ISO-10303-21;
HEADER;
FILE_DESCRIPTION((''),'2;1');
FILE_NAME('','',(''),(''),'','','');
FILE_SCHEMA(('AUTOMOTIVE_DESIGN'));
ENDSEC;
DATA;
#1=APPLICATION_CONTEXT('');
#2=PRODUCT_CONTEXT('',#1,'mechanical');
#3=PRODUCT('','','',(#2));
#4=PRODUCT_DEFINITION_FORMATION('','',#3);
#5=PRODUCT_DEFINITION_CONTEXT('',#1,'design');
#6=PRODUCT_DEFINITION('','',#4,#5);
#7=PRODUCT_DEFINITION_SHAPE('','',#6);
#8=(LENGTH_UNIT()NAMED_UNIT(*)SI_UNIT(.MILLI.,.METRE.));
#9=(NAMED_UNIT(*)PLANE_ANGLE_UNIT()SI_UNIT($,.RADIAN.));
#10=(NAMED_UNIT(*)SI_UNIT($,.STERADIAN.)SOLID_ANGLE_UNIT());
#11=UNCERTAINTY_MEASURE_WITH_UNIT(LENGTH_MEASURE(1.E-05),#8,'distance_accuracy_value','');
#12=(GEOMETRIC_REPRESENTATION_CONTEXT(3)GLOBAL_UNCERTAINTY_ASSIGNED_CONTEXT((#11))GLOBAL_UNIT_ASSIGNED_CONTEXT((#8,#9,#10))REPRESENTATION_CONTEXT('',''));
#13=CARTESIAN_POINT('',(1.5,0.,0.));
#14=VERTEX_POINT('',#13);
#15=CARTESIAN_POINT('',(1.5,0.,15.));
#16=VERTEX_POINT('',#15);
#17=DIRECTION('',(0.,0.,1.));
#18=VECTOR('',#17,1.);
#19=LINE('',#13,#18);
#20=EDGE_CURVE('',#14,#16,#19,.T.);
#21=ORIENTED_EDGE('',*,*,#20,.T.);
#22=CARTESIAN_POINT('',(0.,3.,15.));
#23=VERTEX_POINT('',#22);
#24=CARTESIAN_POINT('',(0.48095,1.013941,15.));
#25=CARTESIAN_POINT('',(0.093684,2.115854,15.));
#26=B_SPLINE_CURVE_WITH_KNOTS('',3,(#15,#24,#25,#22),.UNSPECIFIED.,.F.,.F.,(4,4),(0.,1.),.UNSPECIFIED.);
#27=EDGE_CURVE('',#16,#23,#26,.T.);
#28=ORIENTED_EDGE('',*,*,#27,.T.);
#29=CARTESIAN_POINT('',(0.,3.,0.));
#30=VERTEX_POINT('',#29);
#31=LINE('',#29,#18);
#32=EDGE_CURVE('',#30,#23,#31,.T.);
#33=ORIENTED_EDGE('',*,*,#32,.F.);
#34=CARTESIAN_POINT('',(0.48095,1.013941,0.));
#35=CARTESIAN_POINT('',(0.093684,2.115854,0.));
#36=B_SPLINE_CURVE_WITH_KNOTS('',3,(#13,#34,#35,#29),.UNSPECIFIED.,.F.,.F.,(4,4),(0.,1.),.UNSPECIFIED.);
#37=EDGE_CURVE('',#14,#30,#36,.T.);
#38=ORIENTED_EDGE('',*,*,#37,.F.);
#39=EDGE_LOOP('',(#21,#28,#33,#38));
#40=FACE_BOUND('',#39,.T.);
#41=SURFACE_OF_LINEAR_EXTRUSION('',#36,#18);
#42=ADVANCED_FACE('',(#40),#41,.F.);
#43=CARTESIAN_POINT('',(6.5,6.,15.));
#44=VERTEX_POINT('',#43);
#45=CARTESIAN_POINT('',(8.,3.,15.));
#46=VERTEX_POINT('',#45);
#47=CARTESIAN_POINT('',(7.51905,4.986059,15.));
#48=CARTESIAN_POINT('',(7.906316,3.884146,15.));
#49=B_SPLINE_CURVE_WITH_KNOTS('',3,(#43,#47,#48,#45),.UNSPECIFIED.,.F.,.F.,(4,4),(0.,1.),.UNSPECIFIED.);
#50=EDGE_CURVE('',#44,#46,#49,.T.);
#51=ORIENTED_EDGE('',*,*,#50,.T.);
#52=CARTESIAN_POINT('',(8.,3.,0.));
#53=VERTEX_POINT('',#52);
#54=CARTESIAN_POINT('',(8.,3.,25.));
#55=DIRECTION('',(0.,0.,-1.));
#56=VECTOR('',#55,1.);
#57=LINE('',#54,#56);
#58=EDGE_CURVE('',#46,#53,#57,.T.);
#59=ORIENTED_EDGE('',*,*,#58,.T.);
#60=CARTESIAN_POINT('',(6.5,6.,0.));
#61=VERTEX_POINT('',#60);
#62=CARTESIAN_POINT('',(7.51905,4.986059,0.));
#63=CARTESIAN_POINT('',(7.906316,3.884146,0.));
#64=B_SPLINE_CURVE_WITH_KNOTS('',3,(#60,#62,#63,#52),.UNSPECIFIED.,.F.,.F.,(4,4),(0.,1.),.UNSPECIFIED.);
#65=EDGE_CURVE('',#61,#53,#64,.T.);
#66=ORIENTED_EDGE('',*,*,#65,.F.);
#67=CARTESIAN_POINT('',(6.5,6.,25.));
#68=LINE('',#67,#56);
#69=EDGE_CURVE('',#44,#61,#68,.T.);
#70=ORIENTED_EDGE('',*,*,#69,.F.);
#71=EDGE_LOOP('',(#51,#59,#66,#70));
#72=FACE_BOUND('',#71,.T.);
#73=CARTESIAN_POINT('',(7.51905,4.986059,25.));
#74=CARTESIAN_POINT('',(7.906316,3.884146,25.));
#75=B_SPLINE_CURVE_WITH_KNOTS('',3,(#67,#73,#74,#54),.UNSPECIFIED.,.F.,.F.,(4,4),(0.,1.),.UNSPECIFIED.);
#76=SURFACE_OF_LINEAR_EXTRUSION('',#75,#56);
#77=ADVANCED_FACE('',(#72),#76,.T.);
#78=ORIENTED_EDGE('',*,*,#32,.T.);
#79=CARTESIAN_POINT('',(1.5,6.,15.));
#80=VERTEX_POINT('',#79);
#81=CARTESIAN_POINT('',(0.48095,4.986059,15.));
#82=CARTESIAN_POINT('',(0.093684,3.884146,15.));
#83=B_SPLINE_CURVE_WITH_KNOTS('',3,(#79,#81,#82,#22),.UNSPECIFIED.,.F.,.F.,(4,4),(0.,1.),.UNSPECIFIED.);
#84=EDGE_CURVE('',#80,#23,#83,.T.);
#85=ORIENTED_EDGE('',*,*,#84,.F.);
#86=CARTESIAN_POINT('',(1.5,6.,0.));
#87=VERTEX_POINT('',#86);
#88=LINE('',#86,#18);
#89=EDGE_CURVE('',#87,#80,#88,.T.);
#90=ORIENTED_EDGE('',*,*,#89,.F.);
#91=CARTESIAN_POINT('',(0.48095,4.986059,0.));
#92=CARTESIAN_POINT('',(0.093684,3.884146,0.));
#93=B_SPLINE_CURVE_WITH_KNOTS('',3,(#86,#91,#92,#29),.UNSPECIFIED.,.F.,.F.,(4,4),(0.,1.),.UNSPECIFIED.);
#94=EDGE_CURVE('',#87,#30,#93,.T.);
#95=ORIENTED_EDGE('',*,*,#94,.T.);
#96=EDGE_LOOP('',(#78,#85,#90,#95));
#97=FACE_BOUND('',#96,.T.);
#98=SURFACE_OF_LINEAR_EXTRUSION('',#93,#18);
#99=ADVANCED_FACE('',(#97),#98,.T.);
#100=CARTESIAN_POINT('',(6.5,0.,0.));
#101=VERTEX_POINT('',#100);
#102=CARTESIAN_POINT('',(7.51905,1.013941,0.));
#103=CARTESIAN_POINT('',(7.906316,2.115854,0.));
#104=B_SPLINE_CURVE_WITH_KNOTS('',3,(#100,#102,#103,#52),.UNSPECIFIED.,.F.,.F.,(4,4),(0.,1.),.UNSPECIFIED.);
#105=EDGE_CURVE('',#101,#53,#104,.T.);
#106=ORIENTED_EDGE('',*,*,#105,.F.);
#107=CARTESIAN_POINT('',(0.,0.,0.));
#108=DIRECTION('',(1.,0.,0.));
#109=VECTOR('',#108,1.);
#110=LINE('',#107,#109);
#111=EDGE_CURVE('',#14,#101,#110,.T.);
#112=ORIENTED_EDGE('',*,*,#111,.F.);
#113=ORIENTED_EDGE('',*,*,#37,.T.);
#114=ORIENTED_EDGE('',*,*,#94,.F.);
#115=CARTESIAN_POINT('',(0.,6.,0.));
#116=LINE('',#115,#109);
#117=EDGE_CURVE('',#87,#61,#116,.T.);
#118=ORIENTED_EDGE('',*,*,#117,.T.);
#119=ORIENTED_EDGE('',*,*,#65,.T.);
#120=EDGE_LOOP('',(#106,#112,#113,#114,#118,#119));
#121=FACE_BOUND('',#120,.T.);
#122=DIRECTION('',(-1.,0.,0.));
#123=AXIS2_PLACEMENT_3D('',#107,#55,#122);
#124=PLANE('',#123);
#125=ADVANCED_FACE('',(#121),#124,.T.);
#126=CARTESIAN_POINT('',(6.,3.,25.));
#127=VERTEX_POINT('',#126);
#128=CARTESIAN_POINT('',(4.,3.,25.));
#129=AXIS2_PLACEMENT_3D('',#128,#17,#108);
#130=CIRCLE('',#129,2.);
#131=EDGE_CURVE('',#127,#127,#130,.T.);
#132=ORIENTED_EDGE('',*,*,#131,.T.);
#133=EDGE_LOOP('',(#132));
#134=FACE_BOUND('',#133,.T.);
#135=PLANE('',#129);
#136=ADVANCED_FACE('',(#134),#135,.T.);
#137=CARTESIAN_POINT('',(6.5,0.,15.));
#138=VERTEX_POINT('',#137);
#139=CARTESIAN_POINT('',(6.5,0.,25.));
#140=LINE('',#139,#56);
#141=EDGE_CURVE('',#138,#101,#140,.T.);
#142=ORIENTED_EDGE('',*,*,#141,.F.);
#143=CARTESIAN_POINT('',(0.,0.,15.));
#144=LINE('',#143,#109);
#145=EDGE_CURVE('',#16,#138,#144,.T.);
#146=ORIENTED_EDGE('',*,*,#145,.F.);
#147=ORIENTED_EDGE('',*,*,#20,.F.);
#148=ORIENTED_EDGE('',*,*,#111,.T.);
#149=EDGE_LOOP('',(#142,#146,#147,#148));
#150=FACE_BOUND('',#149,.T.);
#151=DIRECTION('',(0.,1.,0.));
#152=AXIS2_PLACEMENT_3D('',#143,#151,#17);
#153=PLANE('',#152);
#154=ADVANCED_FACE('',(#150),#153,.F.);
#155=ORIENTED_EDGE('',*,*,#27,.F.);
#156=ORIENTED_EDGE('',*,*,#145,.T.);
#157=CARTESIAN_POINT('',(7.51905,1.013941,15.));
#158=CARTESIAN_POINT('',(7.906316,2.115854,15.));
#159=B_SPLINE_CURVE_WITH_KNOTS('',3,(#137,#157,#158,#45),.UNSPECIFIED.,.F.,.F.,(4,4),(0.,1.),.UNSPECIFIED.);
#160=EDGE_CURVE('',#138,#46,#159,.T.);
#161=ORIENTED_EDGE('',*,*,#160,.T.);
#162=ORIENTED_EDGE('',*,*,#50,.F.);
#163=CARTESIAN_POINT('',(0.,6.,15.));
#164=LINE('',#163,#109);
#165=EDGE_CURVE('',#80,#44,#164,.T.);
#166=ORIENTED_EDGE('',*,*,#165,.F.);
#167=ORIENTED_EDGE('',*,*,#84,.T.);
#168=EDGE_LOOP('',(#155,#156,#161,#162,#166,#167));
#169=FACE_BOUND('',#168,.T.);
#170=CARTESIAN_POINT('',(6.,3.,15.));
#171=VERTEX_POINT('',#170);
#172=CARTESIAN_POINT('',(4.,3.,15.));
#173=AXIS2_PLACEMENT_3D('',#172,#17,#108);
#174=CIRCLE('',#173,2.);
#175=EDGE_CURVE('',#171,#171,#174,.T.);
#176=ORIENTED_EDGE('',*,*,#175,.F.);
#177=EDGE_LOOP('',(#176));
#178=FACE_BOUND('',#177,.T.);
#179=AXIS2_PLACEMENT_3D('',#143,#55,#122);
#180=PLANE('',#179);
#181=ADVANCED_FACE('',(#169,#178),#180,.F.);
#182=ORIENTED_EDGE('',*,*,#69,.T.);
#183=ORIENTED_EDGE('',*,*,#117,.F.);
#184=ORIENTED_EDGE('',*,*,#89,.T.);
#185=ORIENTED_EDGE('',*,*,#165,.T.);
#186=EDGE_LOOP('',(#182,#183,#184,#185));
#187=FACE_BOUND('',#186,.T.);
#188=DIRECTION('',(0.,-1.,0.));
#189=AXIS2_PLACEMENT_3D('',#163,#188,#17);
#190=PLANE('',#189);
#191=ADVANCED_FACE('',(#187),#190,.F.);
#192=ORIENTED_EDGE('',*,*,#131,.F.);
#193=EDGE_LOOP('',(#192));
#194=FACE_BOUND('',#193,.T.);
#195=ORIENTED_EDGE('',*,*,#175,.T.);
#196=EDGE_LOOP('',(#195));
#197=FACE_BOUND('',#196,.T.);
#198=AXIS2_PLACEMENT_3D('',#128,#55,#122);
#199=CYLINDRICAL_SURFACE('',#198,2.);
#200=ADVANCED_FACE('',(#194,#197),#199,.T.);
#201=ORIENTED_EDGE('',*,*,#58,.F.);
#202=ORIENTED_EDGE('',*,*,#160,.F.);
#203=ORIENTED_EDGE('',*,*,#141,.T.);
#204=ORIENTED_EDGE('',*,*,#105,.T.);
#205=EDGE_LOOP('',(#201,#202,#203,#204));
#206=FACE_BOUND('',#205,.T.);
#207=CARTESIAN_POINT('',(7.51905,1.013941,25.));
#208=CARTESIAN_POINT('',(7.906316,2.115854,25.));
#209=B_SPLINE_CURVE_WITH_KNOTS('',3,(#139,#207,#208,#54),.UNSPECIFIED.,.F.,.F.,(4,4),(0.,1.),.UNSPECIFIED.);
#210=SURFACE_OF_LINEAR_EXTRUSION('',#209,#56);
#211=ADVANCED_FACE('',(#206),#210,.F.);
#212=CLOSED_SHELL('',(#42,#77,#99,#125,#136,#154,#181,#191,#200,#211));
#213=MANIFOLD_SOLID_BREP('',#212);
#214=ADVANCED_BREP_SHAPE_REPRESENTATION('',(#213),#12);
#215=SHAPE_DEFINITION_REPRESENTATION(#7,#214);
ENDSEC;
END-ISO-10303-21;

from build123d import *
from build123d.topology import SkipClean

# Parameters (mm, degrees)
SKETCH1_W               = 8
SKETCH1_H               = 6
BOSS_EXTRUDE1_DEPTH     = 15
SKETCH2_R               = 2
BOSS_EXTRUDE2_DEPTH     = 10
CUT_EXTRUDE1_DEPTH      = 27.925824036
CIRPATTERN1_DEPTH       = 15
CUT_EXTRUDE2_DEPTH      = 27.925824088
CUT_EXTRUDE2_DEPTH_BACK = 27.925824088
SKETCH4_W               = 8
SKETCH4_H               = 3


# Read off the part's stored shape, not the designer's step: CirPattern1
with BuildPart() as part:
    # Sketch1 → Boss-Extrude1 (new body)
    with BuildSketch(Plane.XY):
        with Locations((4, 3)):
            Rectangle(SKETCH1_W, SKETCH1_H)
    extrude(amount=BOSS_EXTRUDE1_DEPTH)

    # Sketch2 → Boss-Extrude2 (add)
    with BuildSketch(Plane.XY.offset(15)):
        with Locations((4, 3)):
            Circle(SKETCH2_R)
    extrude(amount=BOSS_EXTRUDE2_DEPTH)

    # Sketch3 → Cut-Extrude1 (cut, through all)
    with BuildSketch(Plane(origin=(0, 0, 0), x_dir=(-1, 0, 0), z_dir=(0, 0, -1))):
        with BuildLine():
            Line((-8, 0), (-6.5, 0))
            add(Edge.make_bspline(
                [(-6.5, 0), (-7.519049776, 1.013941068), (-7.906316023, 2.115854023), (-8, 3)],
                knots=[0, 0, 0, 0, 1, 1, 1, 1], degree=3))
            Line((-8, 3), (-8, 0))
        make_face()
    extrude(amount=-CUT_EXTRUDE1_DEPTH, mode=Mode.SUBTRACT)

    # CirPattern1 outline → CirPattern1 (cut)
    with BuildSketch(Plane.XY):
        with BuildLine():
            Line((0, 0), (1.5, 0))
            add(Edge.make_bspline(
                [(1.5, 0), (0.480950224, 1.013941068), (0.093683977, 2.115854023), (0, 3)],
                knots=[0, 0, 0, 0, 1, 1, 1, 1], degree=3))
            Line((0, 3), (0, 0))
        make_face()
    extrude(amount=CIRPATTERN1_DEPTH, mode=Mode.SUBTRACT)

    # Sketch4 → Cut-Extrude2 (cut, two sides: drawn at the far end of the back side and taken through both)
    with BuildSketch(Plane(origin=(0, 0, 0), x_dir=(-1, 0, 0), z_dir=(0, 0, -1)).offset(-CUT_EXTRUDE2_DEPTH_BACK)):
        with Locations((-4, 4.5)):
            Rectangle(SKETCH4_W, SKETCH4_H)
    extrude(amount=CUT_EXTRUDE2_DEPTH + CUT_EXTRUDE2_DEPTH_BACK, mode=Mode.SUBTRACT)

    # Mirror1: part across plane


with BuildPart() as part_1:
    with SkipClean():  # the faces are left unmerged after this step: merging them gives an invalid solid
        add(part.part)
        add(part.part.mirror(Plane(origin=(8, 3, 25), x_dir=(0, 0, 1), z_dir=(0, -1, 0))))


solid = part_1.part
